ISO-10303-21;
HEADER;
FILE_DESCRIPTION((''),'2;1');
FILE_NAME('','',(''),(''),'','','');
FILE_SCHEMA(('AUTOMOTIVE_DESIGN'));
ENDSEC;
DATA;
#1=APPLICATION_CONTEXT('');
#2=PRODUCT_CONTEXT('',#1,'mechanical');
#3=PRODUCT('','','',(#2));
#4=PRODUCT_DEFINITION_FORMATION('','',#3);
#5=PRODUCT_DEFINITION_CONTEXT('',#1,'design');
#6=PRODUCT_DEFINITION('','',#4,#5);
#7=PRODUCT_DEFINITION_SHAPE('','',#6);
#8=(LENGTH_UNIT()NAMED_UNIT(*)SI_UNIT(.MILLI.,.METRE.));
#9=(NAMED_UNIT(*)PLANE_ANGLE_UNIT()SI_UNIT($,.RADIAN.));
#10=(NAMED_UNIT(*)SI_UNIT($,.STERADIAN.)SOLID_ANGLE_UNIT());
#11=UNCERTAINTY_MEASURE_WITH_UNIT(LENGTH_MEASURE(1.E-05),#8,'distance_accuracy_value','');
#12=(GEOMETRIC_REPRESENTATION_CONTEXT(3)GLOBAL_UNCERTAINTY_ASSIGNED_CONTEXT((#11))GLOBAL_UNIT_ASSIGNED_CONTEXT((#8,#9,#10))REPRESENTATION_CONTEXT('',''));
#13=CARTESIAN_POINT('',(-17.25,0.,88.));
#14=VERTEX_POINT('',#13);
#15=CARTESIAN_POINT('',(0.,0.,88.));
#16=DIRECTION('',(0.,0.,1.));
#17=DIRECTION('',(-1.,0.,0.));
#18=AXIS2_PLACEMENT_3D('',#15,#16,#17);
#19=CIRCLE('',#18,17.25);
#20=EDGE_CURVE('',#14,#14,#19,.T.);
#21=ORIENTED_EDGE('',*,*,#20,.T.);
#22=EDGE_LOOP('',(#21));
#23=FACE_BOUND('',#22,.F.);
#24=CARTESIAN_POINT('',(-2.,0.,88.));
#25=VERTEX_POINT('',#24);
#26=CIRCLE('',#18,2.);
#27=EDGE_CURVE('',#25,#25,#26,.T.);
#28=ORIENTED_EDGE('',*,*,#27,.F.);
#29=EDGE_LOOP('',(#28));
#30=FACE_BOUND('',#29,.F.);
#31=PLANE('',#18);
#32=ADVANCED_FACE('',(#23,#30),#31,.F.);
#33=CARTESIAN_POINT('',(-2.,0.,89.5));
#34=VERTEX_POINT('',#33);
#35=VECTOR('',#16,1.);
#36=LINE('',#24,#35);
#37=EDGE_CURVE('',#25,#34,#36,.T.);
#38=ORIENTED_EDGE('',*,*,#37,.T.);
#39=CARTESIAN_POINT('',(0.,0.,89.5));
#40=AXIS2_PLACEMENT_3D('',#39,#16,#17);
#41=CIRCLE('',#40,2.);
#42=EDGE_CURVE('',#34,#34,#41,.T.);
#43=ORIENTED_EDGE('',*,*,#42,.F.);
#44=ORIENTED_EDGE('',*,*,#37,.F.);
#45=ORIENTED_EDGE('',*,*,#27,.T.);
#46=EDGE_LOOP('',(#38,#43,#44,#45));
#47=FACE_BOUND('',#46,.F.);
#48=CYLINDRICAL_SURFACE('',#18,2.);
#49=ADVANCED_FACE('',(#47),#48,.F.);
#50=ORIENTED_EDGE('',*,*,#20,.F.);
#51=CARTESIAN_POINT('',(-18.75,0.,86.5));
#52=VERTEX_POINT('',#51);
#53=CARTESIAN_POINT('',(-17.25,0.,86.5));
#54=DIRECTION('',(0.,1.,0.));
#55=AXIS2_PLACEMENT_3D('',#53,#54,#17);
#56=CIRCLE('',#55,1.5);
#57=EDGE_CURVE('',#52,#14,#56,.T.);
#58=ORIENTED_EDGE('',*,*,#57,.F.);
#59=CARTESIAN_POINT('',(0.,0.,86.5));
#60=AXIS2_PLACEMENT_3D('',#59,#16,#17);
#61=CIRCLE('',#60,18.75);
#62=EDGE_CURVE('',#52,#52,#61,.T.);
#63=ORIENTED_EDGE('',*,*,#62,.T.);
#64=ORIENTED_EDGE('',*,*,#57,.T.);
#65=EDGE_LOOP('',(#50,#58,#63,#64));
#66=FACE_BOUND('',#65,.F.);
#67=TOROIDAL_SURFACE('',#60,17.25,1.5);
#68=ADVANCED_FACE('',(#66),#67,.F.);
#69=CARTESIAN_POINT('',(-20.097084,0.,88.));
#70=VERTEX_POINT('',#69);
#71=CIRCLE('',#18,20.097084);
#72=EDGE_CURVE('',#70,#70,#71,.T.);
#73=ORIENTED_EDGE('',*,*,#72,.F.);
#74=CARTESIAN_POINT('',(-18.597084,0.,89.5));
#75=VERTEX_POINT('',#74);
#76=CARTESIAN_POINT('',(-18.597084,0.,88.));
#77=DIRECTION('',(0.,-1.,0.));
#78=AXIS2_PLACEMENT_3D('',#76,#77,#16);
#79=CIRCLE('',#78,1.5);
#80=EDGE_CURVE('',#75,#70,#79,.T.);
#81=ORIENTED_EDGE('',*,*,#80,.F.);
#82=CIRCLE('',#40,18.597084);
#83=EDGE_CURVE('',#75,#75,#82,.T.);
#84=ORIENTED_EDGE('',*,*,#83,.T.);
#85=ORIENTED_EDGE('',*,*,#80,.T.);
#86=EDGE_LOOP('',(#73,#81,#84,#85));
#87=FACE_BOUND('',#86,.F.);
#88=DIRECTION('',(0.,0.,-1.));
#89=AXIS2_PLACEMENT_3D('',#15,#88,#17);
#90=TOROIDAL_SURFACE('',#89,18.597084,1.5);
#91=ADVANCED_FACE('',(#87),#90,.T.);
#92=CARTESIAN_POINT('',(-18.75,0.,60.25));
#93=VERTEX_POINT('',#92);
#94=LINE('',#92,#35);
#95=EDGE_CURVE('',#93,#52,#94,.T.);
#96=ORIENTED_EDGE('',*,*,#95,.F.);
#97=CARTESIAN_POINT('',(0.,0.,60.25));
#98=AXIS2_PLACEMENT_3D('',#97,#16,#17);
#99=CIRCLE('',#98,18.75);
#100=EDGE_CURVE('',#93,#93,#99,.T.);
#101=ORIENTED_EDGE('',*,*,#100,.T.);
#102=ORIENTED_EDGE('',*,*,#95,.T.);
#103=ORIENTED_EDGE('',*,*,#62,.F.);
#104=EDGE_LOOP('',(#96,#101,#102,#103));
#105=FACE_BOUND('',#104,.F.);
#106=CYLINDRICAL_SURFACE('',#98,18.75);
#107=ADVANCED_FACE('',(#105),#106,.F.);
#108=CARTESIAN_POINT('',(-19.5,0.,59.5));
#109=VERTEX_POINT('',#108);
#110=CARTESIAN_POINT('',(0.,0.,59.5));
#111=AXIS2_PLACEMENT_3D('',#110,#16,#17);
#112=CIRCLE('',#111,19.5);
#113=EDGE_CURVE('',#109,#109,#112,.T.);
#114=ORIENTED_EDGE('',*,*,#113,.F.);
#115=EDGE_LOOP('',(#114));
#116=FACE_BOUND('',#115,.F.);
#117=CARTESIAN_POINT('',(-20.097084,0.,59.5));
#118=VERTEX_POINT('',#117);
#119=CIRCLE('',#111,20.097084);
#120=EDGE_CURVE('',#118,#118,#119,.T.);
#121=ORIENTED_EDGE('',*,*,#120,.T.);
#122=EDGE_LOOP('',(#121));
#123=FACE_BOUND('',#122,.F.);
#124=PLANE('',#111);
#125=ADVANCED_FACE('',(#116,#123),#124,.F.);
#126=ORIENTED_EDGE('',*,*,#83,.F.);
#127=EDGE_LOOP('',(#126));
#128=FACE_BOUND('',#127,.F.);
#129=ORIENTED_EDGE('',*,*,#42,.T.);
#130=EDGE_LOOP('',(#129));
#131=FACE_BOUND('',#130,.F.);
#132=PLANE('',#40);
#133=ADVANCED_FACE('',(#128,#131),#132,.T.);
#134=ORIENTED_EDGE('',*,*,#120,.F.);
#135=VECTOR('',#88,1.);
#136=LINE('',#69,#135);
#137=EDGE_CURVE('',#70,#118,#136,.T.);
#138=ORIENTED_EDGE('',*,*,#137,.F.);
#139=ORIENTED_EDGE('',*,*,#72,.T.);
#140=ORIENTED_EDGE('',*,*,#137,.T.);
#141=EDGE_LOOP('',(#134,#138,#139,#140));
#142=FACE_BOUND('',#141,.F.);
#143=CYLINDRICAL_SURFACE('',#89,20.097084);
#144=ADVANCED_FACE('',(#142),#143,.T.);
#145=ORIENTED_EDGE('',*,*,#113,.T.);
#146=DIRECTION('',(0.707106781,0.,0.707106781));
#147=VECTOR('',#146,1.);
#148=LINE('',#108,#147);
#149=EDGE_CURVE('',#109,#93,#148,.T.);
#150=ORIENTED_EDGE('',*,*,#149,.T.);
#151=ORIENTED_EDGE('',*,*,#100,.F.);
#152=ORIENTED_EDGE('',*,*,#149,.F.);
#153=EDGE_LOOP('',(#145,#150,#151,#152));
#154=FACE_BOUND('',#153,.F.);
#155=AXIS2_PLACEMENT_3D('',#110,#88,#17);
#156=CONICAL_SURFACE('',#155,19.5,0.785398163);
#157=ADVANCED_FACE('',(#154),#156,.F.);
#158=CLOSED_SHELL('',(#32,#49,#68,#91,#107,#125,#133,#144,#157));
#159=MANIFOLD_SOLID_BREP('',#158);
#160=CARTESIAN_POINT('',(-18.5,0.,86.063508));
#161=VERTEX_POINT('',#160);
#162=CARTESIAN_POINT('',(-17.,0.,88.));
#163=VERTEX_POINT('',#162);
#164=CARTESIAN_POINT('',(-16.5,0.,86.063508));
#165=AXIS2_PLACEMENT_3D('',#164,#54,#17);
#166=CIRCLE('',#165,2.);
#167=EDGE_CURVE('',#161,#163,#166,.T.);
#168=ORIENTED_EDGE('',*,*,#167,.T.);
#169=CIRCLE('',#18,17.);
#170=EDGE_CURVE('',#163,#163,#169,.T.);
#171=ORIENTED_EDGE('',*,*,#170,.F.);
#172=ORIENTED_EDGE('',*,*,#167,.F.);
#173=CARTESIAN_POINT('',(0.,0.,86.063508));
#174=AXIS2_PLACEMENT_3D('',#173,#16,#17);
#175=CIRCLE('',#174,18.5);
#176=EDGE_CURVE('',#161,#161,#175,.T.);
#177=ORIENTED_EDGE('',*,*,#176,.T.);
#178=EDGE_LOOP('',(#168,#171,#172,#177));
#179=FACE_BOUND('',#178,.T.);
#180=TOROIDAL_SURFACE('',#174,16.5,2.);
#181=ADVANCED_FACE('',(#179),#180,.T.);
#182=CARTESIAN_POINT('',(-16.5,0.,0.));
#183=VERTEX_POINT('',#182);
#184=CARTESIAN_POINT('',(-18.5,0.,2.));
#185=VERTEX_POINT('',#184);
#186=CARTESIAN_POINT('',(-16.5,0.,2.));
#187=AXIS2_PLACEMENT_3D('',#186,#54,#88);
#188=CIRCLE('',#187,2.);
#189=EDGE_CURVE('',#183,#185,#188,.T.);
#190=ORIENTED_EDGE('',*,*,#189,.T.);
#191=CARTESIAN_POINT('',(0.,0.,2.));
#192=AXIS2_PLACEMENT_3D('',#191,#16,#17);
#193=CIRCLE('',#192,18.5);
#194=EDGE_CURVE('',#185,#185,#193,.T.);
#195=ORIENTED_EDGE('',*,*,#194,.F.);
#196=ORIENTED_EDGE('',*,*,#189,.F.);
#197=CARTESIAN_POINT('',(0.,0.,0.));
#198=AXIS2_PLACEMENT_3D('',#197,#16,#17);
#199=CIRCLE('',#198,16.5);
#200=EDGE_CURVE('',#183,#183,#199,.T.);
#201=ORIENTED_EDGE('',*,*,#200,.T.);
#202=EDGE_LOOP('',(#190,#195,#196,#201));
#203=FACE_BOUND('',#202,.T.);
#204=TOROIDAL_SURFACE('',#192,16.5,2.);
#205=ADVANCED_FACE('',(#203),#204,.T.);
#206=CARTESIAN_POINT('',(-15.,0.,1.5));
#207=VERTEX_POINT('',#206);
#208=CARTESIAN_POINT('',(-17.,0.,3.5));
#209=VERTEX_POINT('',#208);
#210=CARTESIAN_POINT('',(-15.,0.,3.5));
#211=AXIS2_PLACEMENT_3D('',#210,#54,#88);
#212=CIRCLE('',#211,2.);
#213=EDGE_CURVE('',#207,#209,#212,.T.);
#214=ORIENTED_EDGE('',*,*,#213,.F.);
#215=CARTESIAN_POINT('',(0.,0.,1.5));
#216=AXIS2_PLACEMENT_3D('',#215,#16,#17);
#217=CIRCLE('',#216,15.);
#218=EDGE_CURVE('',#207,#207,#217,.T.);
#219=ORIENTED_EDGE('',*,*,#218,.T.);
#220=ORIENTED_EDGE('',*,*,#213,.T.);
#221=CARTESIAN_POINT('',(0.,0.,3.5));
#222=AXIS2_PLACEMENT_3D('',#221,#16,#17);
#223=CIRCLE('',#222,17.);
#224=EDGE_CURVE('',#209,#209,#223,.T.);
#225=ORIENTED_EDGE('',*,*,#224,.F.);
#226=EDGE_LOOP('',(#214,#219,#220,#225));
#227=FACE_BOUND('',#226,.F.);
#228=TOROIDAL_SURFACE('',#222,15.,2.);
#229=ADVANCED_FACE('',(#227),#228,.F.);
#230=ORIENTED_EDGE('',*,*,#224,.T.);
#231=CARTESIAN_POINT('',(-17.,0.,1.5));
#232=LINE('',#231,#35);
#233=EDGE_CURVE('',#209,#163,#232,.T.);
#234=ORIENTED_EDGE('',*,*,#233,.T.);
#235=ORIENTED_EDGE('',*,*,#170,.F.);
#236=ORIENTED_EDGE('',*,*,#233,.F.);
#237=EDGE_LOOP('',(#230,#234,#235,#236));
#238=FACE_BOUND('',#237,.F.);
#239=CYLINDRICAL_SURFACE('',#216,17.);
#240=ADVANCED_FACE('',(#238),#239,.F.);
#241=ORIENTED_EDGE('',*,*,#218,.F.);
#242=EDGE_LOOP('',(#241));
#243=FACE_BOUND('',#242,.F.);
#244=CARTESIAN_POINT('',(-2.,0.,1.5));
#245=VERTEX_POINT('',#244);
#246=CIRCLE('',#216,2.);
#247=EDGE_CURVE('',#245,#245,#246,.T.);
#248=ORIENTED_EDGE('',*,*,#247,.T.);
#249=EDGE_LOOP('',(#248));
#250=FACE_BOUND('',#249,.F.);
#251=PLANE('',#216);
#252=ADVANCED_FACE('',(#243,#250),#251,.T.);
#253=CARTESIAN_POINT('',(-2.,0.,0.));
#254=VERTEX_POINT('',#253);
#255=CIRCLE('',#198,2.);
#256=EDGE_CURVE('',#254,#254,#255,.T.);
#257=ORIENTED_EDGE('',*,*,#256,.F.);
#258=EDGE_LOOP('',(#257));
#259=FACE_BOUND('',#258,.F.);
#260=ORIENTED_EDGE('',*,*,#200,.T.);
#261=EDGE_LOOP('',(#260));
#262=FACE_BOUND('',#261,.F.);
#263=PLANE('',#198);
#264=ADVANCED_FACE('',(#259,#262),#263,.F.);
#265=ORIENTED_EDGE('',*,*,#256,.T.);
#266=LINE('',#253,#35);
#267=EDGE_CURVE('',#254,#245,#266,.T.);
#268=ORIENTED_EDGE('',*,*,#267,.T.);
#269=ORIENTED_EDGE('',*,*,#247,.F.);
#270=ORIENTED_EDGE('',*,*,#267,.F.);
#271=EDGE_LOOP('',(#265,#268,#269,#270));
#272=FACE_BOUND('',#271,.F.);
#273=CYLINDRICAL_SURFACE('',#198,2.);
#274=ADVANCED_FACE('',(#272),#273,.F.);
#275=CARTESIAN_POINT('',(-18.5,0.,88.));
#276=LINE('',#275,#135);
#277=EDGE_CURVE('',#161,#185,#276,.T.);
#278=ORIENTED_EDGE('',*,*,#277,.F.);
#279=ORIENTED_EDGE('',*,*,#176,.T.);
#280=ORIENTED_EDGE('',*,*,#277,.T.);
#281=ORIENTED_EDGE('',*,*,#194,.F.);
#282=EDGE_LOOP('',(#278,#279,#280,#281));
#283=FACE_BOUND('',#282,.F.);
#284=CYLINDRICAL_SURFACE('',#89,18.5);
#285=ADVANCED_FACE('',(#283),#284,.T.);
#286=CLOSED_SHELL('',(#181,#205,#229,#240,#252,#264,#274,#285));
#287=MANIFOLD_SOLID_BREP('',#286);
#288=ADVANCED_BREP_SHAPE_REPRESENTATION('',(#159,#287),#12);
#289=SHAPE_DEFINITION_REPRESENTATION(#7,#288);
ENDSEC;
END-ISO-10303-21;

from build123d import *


# Not quite as in the source:
# - a fillet or chamfer that OpenCascade refuses, or shapes differently, is made with other operations: its cross-section is extruded or revolved along the edge and cut away or added


with BuildPart() as f1:
    # F0 (on Front) → F1 (revolve)
    with BuildSketch(Plane.XZ):
        Polygon((-2, 0), (-2, 1.5), (-17, 1.5), (-17, 88), (-18.5, 88), (-18.5, 0), align=None)
    revolve(axis=Axis((0, 0, 38.7278981507), (0, 0, 1)))

    # F2: fillet of radius 2 on 3 edges, made by hand

    # F2_s1 → F2_t2 (revolve)
    with BuildSketch(Plane.XZ):
        with BuildLine():
            ThreePointArc((-15, 1.5), (-16.4142135624, 2.0857864376), (-17, 3.5))
            Line((-17, 3.5), (-17, 1.5))
            Line((-17, 1.5), (-15, 1.5))
        make_face()
    revolve(axis=Axis((0, 0, 1.5), (0, 0, 1)))

    # F2_s3 → F2_t4 (revolve, cut)
    with BuildSketch(Plane.XZ):
        with BuildLine():
            ThreePointArc((-18.5, 86.0635083269), (-18.0811388301, 87.2882531983), (-17, 88))
            Line((-17, 88), (-18.5, 88))
            Line((-18.5, 88), (-18.5, 86.0635083269))
        make_face()
    revolve(axis=Axis((0, 0, 88), (0, 0, 1)), mode=Mode.SUBTRACT)

    # F2_s5 → F2_t6 (revolve, cut)
    with BuildSketch(Plane.XZ):
        with BuildLine():
            ThreePointArc((-16.5, 0), (-17.9142135624, 0.5857864376), (-18.5, 2))
            Line((-18.5, 2), (-18.5, 0))
            Line((-18.5, 0), (-16.5, 0))
        make_face()
    revolve(axis=Axis((0, 0, 0), (0, 0, 1)), mode=Mode.SUBTRACT)


with BuildPart() as f4:
    # F3 (on Front) → F4 (revolve)
    with BuildSketch(Plane.XZ):
        with BuildLine():
            Line((-20.0970838815, 88), (-20.0970838815, 59.5))
            Line((-20.0970838815, 59.5), (-19.5, 59.5))
            Line((-19.5, 59.5), (-18.75, 60.25))
            Line((-18.75, 60.25), (-18.75, 86.5))
            ThreePointArc((-18.75, 86.5), (-18.3106601718, 87.5606601718), (-17.25, 88))
            Line((-17.25, 88), (-2, 88))
            Line((-2, 88), (-2, 89.5))
            Line((-2, 89.5), (-18.5970838815, 89.5))
            ThreePointArc((-18.5970838815, 89.5), (-19.6577440533, 89.0606601718), (-20.0970838815, 88))
        make_face()
    revolve(axis=Axis((0, 0, 24.4026009697), (0, 0, 1)))


solid = Compound([f1.part, f4.part])
